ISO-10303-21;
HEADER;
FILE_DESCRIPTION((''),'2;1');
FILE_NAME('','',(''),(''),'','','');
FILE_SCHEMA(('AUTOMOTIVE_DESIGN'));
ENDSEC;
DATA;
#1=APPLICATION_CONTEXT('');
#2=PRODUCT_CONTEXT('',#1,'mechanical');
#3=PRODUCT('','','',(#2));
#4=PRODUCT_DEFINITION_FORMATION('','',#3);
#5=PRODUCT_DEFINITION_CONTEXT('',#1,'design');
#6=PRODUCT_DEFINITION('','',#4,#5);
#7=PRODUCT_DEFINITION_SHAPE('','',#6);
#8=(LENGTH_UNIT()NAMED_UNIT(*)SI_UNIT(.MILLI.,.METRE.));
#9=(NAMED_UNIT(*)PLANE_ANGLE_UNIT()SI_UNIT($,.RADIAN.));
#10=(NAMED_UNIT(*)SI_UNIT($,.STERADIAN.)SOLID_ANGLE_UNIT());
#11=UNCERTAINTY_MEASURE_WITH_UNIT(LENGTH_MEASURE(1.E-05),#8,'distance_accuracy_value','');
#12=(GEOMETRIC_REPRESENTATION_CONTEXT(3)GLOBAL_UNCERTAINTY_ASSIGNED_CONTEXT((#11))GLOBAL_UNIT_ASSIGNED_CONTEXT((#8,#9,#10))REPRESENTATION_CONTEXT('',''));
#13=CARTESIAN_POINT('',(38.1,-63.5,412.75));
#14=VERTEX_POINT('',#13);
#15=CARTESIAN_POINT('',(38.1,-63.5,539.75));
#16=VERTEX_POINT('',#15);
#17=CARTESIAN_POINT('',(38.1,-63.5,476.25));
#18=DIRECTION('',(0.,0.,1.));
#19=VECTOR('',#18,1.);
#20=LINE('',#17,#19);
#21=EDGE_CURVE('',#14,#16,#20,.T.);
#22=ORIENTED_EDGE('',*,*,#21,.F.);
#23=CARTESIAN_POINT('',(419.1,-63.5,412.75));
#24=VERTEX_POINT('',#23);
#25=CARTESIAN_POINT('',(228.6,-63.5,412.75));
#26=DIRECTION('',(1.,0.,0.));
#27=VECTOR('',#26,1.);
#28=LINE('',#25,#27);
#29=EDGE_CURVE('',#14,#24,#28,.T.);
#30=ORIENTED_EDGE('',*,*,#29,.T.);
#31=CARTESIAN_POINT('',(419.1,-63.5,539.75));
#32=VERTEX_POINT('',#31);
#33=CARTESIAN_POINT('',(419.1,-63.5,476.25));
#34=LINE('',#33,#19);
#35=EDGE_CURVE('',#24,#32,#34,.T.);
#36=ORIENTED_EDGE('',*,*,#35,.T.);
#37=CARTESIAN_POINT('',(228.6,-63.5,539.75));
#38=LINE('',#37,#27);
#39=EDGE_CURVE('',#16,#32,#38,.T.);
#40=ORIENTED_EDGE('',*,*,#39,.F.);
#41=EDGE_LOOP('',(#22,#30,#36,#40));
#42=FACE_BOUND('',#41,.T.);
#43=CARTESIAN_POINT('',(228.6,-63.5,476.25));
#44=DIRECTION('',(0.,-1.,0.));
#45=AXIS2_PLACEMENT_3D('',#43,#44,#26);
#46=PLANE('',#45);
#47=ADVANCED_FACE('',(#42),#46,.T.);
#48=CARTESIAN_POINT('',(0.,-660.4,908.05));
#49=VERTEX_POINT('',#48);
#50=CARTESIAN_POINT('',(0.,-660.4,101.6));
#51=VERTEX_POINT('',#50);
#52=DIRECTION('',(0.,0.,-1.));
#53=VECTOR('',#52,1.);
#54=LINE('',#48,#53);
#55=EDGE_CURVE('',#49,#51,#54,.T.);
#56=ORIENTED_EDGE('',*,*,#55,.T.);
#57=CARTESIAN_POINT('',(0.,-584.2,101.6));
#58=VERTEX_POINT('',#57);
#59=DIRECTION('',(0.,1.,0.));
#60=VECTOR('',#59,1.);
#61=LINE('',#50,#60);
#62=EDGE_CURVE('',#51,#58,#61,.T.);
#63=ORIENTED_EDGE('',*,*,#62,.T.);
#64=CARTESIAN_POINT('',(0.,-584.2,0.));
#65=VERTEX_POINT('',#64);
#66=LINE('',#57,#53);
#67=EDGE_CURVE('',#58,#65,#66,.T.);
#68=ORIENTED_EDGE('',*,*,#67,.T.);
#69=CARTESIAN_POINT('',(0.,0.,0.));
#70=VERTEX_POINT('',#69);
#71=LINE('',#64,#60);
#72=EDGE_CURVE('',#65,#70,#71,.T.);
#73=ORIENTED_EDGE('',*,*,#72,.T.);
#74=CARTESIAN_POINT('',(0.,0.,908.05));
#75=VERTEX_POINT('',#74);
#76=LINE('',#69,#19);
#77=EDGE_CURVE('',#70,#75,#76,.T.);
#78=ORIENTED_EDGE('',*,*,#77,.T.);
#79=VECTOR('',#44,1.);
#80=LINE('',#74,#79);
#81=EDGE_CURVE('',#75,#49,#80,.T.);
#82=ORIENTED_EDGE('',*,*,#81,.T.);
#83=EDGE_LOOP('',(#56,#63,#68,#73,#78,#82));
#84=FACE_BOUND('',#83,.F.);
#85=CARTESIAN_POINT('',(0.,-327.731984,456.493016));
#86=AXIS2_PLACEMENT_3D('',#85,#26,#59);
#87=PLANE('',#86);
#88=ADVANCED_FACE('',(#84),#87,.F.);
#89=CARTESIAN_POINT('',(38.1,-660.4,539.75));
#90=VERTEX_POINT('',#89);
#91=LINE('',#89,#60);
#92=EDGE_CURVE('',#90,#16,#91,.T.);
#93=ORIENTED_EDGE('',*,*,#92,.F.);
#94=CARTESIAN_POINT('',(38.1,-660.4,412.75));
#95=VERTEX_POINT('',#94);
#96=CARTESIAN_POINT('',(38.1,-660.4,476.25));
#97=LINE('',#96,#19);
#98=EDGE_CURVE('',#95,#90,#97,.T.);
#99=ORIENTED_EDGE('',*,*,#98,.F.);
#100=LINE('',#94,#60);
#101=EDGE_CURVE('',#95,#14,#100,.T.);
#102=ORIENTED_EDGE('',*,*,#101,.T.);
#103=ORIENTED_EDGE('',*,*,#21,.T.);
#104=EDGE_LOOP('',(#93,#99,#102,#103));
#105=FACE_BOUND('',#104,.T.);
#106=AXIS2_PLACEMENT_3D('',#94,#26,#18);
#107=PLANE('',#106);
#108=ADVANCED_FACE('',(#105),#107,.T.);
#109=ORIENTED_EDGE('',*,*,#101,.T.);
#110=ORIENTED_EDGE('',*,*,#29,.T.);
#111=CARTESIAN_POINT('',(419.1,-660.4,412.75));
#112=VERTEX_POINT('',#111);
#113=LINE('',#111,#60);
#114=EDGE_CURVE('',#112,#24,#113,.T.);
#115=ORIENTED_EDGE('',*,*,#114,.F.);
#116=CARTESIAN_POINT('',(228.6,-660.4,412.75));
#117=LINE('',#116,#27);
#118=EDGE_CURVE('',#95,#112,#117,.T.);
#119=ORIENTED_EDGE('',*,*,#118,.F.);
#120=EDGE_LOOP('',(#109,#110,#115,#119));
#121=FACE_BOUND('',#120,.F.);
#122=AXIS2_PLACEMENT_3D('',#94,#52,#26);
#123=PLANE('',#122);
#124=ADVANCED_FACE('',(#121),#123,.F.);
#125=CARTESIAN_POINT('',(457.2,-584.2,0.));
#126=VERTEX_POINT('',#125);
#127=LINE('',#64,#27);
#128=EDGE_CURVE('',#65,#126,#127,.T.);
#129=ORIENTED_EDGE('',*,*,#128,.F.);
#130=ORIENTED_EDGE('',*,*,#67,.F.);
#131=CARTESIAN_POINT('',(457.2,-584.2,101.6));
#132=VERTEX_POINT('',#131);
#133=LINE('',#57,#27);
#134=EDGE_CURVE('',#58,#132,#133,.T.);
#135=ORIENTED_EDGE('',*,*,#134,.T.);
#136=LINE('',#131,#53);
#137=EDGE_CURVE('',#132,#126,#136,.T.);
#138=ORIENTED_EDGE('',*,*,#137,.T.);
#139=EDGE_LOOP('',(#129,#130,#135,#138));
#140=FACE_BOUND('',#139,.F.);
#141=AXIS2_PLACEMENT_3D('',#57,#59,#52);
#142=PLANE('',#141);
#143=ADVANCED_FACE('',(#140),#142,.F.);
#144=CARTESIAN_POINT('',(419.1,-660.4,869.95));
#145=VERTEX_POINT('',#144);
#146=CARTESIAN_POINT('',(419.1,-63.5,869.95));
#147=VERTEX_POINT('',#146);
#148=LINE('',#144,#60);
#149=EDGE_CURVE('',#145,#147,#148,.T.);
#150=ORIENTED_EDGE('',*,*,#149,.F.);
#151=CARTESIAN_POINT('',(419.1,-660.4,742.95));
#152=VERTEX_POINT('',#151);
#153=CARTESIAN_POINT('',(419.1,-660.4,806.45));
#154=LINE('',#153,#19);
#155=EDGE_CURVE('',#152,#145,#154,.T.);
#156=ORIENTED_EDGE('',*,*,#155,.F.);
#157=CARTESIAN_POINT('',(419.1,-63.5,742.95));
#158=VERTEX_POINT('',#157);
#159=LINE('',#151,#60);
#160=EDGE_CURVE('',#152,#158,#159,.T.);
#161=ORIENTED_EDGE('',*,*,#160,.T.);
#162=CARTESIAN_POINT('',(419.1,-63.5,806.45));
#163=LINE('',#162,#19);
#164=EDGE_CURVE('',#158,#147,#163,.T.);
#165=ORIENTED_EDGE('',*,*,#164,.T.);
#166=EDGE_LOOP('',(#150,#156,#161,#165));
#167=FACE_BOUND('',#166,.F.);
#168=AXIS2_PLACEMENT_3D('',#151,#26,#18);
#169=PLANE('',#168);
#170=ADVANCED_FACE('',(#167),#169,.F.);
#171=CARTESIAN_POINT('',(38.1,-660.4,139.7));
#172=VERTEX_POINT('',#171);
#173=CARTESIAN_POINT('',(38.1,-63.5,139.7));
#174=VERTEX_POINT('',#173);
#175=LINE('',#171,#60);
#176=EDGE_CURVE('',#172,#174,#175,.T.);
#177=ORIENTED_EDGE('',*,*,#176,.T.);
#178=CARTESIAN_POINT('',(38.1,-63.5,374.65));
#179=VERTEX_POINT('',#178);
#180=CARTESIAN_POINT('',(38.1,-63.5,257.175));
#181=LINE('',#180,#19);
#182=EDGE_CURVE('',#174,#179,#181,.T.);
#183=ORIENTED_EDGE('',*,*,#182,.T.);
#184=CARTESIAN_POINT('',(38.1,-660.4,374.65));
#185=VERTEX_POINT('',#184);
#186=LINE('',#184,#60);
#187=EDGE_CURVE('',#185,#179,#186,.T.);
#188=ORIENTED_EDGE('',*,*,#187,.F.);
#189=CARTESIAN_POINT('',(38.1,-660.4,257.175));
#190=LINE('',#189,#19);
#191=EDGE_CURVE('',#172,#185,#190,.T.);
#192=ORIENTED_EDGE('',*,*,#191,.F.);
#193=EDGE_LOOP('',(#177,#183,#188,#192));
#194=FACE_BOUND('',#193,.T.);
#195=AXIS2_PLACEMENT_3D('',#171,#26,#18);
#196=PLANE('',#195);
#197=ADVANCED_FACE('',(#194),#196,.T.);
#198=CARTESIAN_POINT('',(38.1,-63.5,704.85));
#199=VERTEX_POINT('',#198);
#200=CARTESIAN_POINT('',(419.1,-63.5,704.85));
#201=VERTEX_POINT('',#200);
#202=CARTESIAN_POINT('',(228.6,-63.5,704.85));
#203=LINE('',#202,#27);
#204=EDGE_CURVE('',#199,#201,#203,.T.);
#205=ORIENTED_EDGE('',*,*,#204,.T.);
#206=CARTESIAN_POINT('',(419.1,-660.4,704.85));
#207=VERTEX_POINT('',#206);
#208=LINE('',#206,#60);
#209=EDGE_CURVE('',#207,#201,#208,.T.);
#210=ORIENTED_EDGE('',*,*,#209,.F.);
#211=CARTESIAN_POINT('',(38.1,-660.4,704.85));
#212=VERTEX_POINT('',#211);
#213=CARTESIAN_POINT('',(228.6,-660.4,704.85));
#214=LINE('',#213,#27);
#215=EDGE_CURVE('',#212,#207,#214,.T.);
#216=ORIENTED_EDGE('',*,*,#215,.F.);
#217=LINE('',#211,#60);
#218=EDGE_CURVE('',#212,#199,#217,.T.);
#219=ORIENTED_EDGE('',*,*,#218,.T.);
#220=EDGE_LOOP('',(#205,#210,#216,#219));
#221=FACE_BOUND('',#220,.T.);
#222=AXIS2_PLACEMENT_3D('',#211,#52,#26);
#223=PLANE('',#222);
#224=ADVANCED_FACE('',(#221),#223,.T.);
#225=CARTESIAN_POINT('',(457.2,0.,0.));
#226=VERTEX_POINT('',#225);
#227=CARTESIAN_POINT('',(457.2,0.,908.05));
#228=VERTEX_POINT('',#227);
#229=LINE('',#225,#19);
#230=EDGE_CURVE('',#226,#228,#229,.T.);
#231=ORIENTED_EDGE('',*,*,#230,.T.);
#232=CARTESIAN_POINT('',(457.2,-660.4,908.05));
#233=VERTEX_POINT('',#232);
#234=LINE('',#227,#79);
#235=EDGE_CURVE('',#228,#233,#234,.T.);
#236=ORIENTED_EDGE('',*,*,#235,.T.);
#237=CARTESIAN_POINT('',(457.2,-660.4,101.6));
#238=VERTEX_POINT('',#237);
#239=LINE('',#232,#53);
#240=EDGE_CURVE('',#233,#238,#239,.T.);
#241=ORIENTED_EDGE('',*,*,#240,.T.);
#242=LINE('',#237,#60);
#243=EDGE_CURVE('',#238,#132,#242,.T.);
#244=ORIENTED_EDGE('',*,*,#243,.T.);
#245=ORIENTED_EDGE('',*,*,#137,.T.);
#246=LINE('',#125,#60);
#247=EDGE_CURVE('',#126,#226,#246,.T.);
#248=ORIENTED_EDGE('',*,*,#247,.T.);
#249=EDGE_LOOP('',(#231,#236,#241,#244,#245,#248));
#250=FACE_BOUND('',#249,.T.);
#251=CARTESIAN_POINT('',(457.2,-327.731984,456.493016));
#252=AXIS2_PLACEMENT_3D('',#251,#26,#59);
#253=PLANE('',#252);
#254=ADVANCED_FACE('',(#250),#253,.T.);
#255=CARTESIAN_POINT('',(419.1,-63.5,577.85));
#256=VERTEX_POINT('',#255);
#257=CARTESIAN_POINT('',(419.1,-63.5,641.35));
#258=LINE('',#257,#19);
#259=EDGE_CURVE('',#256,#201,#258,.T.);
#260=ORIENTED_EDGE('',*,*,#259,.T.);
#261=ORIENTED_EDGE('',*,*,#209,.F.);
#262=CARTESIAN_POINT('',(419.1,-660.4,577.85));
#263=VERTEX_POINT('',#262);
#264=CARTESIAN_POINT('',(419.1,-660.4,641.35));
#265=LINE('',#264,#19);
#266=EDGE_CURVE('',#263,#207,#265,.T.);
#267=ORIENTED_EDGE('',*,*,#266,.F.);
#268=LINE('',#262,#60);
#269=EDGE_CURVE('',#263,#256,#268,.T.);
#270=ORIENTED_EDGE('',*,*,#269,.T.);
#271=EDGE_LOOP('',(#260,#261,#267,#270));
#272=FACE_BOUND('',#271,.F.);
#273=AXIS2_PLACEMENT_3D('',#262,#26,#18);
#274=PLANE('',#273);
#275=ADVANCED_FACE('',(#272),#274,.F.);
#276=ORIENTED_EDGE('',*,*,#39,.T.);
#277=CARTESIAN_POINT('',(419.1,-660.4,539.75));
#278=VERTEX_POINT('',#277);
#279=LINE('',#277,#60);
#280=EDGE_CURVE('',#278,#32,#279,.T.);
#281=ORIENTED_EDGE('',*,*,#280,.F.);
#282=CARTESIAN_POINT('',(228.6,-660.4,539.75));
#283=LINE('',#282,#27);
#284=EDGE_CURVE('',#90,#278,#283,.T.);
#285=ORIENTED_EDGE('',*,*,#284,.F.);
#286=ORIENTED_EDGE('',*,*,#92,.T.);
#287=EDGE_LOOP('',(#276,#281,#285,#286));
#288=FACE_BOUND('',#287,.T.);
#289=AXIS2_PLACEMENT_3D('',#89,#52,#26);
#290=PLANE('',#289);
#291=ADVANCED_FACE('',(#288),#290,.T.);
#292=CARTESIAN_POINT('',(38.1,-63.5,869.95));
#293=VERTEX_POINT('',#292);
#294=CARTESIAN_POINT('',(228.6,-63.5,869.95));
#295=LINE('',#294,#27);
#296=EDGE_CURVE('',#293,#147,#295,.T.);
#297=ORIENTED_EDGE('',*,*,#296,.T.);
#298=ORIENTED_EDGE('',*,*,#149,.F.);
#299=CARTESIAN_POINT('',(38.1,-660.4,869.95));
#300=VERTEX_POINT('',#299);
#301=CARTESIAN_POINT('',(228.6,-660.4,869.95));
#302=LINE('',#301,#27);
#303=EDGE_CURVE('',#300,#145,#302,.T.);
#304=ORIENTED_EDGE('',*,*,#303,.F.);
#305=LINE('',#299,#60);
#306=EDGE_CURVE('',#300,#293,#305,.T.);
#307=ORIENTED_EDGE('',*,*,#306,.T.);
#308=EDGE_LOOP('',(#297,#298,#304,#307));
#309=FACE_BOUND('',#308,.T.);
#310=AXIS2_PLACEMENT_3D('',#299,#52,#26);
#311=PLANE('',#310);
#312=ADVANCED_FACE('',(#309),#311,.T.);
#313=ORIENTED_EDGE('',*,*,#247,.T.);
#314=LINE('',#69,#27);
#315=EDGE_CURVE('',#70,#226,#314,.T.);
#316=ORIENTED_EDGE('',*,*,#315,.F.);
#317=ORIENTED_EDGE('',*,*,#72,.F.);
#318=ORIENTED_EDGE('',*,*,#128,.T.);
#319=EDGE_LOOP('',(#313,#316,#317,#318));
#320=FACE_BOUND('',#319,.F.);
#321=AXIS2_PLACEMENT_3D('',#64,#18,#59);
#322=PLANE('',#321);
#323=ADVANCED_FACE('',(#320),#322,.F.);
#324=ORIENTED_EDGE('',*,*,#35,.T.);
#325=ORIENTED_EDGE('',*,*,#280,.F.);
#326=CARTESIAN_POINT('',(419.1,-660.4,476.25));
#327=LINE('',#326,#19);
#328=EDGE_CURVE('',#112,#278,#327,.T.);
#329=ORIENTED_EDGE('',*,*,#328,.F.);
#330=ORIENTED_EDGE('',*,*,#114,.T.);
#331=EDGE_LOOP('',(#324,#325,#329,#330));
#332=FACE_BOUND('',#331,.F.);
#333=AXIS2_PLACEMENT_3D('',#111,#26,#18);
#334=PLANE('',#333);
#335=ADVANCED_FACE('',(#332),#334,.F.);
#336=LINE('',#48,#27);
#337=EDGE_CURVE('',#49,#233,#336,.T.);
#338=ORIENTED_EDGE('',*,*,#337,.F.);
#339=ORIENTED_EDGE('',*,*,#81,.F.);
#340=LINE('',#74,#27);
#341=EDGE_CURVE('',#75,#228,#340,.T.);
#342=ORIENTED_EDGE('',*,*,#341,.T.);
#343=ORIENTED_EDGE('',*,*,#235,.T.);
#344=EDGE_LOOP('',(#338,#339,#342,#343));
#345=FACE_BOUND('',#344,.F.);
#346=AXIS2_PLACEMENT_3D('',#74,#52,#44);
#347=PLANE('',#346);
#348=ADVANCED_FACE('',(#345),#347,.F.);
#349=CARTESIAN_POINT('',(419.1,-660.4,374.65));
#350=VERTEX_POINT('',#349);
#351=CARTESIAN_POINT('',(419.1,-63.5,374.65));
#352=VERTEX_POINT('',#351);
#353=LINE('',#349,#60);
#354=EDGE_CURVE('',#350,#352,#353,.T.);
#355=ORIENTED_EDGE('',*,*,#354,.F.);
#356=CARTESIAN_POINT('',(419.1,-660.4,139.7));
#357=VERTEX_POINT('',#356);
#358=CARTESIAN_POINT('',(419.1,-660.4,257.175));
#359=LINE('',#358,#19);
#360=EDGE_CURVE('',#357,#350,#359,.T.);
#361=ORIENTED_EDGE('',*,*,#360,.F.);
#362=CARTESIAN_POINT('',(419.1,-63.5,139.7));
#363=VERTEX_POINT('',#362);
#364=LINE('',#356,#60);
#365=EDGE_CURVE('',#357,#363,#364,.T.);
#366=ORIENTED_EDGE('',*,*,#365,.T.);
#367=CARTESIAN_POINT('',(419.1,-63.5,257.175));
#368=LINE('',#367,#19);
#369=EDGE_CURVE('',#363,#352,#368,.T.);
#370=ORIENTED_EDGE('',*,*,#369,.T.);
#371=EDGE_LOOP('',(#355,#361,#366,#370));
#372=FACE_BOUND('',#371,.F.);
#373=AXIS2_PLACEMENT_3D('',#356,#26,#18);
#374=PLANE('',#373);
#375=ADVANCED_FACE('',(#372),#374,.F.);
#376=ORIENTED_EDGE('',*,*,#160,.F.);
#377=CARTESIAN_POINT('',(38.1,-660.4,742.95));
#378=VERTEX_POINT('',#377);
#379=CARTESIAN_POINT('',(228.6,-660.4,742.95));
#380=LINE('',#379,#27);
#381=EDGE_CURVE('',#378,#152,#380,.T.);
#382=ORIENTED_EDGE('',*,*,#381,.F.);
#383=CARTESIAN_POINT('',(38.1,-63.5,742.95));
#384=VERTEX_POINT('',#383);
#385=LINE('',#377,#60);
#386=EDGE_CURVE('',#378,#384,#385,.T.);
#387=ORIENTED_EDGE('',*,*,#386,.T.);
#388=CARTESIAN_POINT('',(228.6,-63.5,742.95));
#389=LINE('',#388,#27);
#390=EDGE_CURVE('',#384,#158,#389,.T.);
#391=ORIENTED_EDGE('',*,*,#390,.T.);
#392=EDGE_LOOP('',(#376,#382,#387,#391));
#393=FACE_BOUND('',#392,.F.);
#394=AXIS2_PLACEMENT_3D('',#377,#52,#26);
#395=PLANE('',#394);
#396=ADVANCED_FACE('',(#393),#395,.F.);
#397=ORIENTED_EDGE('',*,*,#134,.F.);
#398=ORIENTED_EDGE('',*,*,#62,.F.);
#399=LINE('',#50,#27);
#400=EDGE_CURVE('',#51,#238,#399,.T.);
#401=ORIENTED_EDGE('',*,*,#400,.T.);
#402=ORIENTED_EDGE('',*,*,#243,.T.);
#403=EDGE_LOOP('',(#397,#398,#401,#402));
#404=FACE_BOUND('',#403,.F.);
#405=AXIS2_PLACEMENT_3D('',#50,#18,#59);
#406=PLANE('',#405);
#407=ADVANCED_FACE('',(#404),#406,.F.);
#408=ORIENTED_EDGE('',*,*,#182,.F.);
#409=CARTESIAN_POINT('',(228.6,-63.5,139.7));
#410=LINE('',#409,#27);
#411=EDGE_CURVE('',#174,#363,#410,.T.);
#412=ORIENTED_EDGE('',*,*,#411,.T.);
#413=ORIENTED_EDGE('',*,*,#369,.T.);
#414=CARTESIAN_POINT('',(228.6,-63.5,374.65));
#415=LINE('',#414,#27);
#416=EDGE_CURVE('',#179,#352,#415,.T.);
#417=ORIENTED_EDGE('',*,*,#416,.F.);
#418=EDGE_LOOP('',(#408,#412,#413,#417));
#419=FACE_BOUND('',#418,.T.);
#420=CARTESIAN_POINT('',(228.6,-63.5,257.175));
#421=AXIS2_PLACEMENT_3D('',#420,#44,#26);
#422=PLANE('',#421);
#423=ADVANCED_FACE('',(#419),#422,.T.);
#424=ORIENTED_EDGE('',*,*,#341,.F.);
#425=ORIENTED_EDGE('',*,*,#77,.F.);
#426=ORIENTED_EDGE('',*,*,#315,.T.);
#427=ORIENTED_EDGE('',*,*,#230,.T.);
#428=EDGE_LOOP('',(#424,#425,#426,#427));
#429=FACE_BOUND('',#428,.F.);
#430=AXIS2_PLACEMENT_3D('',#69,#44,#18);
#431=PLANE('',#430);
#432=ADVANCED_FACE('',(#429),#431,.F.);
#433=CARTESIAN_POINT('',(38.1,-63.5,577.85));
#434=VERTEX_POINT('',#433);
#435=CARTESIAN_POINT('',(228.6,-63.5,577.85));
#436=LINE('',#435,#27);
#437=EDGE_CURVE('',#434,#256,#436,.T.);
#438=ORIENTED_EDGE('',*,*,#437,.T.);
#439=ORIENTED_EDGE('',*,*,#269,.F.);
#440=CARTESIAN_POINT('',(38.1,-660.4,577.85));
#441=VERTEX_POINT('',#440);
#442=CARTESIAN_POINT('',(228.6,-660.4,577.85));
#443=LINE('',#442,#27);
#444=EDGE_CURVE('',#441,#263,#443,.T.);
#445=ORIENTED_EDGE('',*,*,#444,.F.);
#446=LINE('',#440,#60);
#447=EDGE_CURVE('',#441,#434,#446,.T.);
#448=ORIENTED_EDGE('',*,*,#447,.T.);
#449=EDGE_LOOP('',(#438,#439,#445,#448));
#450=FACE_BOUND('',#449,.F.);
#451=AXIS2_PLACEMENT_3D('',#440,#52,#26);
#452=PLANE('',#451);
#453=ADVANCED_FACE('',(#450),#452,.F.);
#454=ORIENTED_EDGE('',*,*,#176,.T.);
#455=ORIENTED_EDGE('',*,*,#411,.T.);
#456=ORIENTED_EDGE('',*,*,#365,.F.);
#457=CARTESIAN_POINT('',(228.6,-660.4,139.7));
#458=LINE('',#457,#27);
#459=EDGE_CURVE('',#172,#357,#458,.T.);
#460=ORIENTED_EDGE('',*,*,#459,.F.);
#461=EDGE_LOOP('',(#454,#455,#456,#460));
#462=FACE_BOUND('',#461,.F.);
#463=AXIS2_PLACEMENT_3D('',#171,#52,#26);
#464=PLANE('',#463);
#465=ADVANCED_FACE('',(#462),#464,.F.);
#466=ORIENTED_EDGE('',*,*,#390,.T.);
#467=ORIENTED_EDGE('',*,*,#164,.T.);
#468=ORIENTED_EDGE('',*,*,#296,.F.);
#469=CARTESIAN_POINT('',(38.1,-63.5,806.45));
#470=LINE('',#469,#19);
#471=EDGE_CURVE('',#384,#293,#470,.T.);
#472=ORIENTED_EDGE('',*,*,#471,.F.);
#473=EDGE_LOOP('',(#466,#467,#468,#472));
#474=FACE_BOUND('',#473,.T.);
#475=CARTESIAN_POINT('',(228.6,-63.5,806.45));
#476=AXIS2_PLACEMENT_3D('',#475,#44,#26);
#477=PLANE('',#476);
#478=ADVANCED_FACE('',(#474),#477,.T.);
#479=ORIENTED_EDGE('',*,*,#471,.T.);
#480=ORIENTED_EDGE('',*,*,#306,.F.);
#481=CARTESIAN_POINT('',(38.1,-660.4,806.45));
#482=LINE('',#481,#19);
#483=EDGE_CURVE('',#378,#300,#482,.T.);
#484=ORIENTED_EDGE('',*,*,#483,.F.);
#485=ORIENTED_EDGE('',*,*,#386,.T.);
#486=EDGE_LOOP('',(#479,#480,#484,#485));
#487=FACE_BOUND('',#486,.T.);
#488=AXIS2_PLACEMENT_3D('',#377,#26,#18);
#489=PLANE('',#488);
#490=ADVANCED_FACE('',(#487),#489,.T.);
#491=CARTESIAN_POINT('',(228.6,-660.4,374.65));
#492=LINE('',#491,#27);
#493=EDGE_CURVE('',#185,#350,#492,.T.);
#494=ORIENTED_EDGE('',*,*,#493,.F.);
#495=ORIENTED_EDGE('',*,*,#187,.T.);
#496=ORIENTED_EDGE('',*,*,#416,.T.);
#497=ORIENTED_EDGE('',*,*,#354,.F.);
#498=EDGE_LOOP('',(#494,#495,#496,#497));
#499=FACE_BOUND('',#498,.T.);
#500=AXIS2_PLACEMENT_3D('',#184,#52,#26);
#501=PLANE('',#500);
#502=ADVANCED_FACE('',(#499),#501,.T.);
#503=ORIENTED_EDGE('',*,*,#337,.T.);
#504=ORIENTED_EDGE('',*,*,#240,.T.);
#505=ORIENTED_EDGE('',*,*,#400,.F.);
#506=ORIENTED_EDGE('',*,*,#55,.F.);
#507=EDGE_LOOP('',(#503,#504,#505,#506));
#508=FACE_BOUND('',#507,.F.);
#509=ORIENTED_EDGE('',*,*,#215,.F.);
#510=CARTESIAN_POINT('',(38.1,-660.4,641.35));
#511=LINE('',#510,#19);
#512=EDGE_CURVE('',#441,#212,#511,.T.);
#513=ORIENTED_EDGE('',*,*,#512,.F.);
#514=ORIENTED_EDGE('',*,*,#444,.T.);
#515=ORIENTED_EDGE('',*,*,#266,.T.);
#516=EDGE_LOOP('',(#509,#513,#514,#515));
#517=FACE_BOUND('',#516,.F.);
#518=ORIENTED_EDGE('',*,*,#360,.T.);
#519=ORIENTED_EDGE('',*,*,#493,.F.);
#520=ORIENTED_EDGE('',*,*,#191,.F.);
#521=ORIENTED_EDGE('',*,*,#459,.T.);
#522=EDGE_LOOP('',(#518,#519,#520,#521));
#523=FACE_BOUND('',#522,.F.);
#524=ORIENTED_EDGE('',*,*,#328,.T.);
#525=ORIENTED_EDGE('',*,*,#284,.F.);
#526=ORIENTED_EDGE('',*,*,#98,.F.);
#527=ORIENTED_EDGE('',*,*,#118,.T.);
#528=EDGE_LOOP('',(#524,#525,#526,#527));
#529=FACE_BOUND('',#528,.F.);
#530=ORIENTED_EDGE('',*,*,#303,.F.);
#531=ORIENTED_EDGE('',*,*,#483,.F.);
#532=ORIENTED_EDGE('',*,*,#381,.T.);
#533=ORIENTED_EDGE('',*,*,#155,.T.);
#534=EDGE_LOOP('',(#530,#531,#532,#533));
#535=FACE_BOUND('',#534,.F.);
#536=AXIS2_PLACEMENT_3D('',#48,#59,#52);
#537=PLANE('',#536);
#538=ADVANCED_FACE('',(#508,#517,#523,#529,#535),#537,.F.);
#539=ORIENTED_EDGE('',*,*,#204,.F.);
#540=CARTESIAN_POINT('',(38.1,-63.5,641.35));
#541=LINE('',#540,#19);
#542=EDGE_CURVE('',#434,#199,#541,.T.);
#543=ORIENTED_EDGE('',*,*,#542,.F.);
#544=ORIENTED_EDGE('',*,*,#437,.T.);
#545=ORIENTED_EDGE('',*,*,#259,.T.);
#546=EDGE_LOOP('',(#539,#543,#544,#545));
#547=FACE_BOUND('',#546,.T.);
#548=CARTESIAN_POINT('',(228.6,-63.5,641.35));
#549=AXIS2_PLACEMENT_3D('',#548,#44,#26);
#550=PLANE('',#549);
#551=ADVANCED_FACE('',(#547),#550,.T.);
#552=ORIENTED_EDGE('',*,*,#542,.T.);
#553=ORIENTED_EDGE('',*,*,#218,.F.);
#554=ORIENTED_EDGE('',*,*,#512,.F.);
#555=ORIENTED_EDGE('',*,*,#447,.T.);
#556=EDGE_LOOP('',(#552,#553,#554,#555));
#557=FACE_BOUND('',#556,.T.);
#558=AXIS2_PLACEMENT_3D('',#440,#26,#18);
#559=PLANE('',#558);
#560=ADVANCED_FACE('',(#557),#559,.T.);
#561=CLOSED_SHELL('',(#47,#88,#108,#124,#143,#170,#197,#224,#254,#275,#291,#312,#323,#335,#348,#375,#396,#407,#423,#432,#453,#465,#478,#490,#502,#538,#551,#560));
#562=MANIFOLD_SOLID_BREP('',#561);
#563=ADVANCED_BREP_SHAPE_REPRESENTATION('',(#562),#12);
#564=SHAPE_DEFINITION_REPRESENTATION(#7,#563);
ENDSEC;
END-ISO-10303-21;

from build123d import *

# Parameters (mm, degrees)
F1_DEPTH = 457.2
F2_W     = 381
F2_H     = 127
F2_H_2   = 234.95
F3_DEPTH = 596.9


# Not quite as in the source:
# - a feature names something its author has since deleted; it is built from what else it names


with BuildPart() as f1:
    # F0 (on Right) → F1 (new body)
    with BuildSketch(Plane.YZ):
        Polygon((-584.2, 0), (0, 0), (0, 908.05), (-660.4, 908.05), (-660.4, 101.6), (-584.2, 101.6), align=None)
    extrude(amount=F1_DEPTH)

    # F2 (on face) → F3 (cut)
    with BuildSketch(Plane.XZ.offset(660.4)):
        with Locations((228.6, 806.45)):
            Rectangle(F2_W, F2_H)
        with Locations((228.6, 641.35)):
            Rectangle(F2_W, F2_H)
        with Locations((228.6, 476.25)):
            Rectangle(F2_W, F2_H)
        with Locations((228.6, 257.175)):
            Rectangle(F2_W, F2_H_2)
    extrude(amount=-F3_DEPTH, mode=Mode.SUBTRACT)


solid = f1.part
